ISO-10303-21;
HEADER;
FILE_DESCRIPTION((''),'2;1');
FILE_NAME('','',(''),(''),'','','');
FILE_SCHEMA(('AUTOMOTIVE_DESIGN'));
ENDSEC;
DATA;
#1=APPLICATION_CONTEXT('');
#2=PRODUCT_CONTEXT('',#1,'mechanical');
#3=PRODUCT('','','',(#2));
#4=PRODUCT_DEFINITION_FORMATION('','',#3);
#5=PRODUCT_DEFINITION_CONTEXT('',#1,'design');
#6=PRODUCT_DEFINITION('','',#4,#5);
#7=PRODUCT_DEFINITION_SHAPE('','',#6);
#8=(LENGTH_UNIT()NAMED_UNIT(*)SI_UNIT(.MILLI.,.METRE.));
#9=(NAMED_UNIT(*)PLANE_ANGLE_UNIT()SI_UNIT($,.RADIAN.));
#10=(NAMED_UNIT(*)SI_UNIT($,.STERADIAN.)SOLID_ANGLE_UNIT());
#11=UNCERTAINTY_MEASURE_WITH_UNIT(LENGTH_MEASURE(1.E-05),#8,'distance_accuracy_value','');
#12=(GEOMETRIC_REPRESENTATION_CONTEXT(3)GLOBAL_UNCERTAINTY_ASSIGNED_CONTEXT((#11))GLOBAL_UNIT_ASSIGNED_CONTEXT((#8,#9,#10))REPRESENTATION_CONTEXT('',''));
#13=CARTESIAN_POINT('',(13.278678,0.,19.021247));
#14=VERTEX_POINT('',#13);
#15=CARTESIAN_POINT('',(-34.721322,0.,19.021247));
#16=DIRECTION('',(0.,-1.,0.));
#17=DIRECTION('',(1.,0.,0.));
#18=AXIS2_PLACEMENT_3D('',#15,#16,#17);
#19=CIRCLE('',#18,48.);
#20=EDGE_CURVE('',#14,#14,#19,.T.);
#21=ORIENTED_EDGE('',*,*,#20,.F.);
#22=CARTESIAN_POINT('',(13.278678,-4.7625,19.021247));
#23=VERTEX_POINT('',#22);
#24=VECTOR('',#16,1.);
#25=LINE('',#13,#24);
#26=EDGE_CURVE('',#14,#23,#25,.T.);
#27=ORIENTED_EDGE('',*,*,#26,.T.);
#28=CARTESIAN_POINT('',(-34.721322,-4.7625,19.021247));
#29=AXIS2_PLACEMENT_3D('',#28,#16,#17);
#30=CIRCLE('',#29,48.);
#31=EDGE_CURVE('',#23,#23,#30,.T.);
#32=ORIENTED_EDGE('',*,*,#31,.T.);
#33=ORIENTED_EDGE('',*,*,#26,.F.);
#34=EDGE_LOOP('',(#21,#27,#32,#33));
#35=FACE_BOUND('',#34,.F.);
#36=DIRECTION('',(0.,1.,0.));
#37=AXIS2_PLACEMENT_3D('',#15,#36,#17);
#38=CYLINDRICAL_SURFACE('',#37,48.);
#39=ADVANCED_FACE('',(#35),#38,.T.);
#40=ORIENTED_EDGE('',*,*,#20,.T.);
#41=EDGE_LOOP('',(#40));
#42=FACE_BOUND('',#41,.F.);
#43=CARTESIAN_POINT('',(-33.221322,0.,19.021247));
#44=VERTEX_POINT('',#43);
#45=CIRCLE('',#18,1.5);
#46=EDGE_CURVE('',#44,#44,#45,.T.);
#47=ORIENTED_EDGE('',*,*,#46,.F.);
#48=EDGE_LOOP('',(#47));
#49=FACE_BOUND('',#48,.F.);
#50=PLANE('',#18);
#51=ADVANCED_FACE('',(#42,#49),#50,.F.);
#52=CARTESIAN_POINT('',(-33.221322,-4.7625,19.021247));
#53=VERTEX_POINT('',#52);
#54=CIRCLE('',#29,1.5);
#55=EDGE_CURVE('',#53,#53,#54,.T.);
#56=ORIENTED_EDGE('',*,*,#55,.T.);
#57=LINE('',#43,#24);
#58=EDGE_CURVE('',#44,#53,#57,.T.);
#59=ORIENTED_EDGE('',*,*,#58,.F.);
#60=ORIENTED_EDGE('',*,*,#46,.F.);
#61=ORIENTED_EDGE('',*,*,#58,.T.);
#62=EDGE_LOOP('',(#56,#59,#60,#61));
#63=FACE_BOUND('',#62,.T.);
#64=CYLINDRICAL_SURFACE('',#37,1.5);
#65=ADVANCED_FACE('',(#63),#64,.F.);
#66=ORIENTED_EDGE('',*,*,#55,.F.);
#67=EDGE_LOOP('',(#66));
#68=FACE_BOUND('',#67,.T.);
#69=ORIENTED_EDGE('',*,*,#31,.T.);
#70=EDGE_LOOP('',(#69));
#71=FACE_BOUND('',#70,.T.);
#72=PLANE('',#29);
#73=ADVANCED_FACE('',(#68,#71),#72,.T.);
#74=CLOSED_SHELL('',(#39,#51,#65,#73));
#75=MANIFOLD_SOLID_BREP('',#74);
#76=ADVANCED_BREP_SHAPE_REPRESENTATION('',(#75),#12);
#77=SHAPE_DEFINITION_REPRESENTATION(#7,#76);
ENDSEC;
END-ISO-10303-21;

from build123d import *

# Parameters (mm, degrees)
F0_R     = 48
F0_R_2   = 1.5
F1_DEPTH = 4.7625


# Not quite as in the source:
# - a feature names something its author has since deleted; it is built from what else it names


with BuildPart() as f1:
    # F0 (on Front) → F1 (new body)
    with BuildSketch(Plane.XZ):
        with Locations((-34.7213223577, 19.0212465823)):
            Circle(F0_R)
        with Locations((-34.7213223577, 19.0212465823)):
            Circle(F0_R_2, mode=Mode.SUBTRACT)
    extrude(amount=F1_DEPTH)


solid = f1.part
